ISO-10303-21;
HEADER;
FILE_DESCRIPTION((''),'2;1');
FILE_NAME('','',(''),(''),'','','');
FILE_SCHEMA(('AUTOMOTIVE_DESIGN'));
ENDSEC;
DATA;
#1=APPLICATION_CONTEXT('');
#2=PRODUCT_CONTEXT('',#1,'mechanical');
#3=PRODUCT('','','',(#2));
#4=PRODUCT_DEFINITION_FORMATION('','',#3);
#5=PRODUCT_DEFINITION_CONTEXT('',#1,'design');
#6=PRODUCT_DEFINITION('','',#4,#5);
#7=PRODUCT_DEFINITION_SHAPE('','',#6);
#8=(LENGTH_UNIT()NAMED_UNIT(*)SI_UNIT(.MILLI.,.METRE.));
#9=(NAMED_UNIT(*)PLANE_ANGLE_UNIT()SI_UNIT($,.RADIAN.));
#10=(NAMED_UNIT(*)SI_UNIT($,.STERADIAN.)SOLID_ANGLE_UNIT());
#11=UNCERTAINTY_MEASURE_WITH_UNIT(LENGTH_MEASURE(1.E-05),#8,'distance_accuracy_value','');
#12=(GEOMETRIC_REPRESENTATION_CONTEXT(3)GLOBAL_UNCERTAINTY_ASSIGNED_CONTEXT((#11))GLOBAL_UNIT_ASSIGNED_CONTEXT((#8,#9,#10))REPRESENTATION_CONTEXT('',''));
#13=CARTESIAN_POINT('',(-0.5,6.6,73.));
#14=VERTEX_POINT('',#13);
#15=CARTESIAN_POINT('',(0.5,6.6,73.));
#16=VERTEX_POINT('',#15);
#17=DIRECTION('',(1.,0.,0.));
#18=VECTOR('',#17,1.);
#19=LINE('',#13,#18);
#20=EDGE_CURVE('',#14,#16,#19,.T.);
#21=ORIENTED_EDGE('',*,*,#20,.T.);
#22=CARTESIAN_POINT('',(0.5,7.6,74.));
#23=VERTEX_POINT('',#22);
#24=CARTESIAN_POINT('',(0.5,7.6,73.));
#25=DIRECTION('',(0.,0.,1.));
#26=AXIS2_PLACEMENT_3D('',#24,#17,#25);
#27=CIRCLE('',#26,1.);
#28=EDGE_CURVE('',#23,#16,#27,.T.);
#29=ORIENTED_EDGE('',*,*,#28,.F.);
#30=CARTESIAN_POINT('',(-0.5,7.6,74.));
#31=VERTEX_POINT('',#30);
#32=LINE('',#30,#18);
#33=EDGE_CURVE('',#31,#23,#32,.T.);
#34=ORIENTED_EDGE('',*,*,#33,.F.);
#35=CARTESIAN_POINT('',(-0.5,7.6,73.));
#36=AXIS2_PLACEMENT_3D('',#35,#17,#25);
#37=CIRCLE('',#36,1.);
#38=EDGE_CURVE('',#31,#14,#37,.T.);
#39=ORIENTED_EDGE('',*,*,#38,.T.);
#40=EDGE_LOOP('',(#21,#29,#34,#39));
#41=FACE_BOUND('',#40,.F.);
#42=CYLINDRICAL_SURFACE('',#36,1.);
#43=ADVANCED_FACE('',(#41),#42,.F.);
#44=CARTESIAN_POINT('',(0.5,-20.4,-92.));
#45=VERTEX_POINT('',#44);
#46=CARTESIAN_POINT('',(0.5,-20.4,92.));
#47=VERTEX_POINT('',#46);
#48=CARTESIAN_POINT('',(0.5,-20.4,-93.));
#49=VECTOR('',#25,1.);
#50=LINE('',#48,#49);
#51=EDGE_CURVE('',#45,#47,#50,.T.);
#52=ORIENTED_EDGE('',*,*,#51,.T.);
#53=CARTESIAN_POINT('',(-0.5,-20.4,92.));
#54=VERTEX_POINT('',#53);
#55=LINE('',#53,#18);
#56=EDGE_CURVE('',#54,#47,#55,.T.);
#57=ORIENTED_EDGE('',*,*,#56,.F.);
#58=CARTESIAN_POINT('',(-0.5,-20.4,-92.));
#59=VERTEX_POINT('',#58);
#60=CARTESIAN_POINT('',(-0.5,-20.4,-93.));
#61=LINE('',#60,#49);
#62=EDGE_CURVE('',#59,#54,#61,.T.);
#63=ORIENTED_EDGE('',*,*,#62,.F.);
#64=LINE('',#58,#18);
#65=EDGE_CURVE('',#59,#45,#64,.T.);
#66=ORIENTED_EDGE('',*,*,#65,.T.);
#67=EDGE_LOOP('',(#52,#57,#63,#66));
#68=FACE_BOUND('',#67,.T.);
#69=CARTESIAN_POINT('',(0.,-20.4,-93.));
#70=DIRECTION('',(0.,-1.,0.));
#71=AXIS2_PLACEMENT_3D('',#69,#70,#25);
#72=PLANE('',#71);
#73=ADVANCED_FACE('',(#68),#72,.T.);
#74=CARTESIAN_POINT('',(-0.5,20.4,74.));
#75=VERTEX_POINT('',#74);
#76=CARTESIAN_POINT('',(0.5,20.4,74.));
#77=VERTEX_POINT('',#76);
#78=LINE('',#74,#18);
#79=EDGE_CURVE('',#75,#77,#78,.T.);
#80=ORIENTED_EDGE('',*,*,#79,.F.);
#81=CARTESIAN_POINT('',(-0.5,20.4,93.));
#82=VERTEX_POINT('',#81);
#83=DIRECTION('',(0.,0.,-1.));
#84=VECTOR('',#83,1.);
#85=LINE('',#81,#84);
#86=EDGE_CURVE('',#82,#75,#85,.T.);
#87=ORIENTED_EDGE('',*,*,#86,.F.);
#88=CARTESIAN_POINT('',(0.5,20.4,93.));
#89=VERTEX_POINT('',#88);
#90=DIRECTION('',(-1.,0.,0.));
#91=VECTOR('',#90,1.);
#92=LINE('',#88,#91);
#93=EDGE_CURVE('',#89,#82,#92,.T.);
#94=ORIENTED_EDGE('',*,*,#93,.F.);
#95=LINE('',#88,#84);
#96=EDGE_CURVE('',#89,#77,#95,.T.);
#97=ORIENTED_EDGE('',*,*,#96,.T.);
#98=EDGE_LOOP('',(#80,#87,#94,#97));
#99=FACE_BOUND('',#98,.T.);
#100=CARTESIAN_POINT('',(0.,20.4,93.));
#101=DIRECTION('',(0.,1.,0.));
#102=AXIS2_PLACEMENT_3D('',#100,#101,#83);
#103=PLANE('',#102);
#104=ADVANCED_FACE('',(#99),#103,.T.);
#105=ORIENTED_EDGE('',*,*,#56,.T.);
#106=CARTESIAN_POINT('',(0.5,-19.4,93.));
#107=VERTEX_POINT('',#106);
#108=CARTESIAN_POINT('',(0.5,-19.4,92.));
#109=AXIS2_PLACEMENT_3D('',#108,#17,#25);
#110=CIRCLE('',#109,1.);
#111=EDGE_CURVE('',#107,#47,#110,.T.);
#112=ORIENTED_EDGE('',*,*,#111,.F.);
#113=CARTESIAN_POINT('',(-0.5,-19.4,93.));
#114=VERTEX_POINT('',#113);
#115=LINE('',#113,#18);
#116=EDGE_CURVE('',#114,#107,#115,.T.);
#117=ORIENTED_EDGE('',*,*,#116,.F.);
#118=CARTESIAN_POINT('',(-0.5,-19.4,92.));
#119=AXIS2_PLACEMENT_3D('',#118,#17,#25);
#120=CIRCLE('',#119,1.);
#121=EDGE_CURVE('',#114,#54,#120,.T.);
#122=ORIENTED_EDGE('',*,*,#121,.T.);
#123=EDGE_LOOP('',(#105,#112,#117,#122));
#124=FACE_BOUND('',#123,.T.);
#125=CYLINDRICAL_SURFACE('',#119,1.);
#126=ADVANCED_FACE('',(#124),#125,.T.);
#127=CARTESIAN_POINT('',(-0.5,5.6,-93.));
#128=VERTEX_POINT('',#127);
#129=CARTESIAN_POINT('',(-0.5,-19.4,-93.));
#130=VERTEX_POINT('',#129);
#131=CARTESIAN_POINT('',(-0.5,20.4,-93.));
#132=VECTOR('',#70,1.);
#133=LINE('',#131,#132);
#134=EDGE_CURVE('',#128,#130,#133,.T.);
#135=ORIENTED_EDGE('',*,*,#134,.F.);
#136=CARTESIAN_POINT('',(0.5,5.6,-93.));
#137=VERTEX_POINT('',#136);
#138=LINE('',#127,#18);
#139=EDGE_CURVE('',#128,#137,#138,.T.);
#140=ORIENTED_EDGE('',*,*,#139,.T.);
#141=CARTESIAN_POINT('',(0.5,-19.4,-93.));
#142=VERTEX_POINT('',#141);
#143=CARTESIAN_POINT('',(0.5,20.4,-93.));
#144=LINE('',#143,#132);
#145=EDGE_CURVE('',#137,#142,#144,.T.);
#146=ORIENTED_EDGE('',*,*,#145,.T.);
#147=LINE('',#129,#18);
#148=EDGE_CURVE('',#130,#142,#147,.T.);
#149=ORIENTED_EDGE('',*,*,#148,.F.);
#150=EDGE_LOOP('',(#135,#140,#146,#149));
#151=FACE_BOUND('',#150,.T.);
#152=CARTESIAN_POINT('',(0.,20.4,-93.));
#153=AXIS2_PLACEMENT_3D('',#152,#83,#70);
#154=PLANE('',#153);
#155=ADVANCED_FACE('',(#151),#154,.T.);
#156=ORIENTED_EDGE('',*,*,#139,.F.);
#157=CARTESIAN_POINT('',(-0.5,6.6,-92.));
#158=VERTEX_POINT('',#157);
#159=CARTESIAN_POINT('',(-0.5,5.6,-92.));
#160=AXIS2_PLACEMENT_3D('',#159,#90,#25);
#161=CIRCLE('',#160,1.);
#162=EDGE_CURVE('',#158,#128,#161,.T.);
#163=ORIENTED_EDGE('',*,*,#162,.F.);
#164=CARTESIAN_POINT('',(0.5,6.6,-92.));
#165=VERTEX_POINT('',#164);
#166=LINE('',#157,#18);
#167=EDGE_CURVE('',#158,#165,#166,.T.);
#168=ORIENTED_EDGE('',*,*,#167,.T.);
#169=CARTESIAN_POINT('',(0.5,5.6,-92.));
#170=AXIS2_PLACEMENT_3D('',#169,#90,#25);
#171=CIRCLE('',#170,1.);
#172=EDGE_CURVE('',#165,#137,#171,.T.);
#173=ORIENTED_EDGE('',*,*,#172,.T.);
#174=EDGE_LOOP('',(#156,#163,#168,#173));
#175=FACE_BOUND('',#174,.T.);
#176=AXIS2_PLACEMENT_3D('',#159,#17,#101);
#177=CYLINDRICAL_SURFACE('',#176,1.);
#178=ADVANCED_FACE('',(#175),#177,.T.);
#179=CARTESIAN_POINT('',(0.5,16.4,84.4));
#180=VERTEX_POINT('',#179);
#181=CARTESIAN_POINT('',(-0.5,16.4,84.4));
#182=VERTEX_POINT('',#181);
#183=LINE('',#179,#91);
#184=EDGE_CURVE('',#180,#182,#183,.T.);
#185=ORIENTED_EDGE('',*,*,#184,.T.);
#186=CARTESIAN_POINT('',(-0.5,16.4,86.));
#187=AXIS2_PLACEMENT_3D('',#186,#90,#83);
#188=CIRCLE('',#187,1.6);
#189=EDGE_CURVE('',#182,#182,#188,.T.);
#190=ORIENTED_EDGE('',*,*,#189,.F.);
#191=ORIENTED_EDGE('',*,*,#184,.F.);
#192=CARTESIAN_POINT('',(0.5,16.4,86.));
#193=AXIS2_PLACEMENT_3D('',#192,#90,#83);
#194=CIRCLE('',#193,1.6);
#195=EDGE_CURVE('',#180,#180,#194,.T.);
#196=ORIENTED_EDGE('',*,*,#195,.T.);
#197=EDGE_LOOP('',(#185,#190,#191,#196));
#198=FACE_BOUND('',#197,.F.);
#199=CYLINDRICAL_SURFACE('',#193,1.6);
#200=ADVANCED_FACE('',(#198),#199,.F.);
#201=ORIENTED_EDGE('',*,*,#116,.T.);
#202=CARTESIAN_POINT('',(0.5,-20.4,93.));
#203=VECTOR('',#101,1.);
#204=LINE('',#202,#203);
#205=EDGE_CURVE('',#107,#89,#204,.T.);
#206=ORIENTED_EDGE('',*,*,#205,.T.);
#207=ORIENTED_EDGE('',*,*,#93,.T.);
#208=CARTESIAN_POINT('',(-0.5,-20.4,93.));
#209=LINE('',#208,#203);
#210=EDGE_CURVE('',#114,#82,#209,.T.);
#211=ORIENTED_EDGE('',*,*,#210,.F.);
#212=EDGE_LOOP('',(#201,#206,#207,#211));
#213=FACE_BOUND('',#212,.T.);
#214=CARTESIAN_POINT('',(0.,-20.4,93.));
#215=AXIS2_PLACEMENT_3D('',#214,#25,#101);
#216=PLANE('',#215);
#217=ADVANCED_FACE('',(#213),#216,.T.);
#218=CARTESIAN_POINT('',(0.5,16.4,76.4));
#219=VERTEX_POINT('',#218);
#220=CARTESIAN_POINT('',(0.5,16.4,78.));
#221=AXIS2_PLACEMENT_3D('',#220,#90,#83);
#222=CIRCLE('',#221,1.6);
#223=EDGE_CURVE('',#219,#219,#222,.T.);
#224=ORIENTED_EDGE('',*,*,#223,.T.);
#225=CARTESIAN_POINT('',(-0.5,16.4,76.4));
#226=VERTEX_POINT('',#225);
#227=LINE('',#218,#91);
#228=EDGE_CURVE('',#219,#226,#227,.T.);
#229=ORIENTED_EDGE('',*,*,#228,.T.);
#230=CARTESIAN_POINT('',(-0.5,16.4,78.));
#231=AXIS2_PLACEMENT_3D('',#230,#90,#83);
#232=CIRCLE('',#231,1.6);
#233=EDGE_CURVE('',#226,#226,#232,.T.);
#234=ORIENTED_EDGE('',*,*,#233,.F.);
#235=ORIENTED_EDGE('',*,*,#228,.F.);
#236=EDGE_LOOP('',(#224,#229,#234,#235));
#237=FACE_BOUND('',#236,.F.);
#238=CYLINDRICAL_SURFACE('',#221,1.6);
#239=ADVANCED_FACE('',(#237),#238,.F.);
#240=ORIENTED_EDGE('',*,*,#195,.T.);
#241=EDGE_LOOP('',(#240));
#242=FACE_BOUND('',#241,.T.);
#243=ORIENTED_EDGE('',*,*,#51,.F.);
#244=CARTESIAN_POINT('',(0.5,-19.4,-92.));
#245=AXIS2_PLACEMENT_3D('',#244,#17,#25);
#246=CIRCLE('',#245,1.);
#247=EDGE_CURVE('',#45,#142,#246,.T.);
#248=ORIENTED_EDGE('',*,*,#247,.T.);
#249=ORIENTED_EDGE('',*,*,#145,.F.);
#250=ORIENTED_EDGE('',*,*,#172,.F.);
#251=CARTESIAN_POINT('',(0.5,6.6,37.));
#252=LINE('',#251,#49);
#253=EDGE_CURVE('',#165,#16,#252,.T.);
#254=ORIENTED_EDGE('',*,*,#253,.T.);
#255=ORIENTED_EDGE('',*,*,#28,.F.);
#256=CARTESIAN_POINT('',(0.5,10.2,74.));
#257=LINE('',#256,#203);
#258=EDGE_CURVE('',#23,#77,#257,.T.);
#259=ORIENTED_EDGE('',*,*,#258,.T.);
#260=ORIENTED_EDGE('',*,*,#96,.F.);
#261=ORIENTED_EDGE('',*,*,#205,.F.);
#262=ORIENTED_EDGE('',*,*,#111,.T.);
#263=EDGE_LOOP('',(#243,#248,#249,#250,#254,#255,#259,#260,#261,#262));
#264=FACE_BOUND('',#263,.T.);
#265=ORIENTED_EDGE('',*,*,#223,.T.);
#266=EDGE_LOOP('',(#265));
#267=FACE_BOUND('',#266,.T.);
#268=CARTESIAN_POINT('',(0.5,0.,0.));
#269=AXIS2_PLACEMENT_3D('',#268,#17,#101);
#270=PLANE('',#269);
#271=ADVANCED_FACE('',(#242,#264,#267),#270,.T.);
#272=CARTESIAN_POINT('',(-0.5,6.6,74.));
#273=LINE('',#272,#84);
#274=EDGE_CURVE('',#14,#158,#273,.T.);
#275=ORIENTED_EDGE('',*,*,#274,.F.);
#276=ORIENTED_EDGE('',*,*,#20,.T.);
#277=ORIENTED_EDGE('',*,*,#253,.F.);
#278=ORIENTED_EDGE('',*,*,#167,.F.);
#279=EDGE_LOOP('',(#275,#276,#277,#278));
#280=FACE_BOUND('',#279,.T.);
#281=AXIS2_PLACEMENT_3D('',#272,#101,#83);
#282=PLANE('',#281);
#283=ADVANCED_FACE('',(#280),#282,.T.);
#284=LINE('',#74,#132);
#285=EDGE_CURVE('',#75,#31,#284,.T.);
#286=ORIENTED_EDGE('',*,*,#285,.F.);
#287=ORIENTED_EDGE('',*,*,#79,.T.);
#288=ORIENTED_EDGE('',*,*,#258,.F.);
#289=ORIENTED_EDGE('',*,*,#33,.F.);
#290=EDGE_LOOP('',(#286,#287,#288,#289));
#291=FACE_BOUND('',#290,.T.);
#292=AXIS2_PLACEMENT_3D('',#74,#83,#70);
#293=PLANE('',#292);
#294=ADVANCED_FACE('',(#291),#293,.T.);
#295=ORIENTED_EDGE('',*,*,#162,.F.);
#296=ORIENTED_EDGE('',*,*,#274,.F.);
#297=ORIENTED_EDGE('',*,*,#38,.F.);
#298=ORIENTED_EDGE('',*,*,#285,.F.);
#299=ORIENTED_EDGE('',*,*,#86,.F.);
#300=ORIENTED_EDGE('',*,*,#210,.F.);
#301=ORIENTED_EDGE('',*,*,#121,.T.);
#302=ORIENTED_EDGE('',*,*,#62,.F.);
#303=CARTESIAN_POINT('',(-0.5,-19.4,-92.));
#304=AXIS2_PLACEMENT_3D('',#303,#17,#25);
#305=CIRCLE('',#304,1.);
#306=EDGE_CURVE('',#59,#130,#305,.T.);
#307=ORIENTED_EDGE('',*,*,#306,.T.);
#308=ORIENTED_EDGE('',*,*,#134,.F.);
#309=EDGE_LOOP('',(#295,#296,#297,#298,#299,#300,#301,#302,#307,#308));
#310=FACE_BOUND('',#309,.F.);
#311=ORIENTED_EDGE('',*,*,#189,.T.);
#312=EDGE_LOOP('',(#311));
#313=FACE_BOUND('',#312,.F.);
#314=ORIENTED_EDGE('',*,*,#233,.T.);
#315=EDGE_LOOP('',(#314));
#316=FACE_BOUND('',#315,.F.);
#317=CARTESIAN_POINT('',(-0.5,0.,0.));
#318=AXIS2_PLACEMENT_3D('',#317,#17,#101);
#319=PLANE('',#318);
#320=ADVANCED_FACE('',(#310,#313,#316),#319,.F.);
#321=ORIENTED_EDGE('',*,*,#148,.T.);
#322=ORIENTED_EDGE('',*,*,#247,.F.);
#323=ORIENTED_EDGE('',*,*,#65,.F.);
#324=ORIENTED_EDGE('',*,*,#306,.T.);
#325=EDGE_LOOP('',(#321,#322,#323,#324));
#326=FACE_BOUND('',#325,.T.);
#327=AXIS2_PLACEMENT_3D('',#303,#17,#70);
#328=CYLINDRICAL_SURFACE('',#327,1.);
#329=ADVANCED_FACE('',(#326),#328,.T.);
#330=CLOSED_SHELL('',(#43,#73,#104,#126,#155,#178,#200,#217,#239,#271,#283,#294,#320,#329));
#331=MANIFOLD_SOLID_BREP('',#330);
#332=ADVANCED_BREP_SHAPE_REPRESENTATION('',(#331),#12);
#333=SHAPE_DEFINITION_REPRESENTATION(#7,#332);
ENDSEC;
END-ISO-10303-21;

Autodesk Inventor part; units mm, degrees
ref_plane "YZ Plane" through (0, 0, 0) normal (1, 0, 0) x (0, 1, 0)
ref_plane "XZ Plane" through (0, 0, 0) normal (0, 1, 0) x (-1, 0, 0)
ref_plane "XY Plane" through (0, 0, 0) normal (0, 0, 1) x (1, 0, 0)
sketch "スケッチ1" plane through (0, 0, 0) normal (1, 0, 0) x (0, 1, 0)
  line L0 (-20.4, 93) -> (20.4, 93)
  line L1 (20.4, 93) -> (20.4, -93)
  line L2 (20.4, -93) -> (-20.4, -93)
  line L3 (-20.4, -93) -> (-20.4, 93)
  line L4 (-20.4, 93) -> (20.4, -93) construction
  line L5 (20.4, 93) -> (-20.4, -93) construction
  point P0 (0, 0)
  dimension "d0" = 40.8
  dimension "d1" = 186
extrude "プレート1" add sketch "スケッチ1" along normal mid plane 1
sketch "スケッチ2" plane through (0.5, 0, 0) normal (1, 0, 0) x (0, 0, -1)
  line L0 (-93, 20.4) -> (93, 20.4) projected
  line L1 (-93, -20.4) -> (-93, 20.4) projected
  point P0 (0, 0)
  point P1 (-86, 16.4)
  point P2 (-78, 16.4)
  dimension "d3" = 4
  dimension "d4" = 7
  dimension "d5" = 8
hole "穴1" at (0.5, 16.4, 86) at (0.5, 16.4, 78) direction (-1, 0, 0) diameter 3.2 end through all clearance for "Socket Head Cap Screw" size "M3" standard "Ansi Metric M Profile"
sketch "スケッチ3" plane through (-0.5, 0, 0) normal (-1, 0, 0) x (0, 0, 1)
  line L0 (-93, 20.4) -> (-93, -20.4) projected
  line L1 (-93, 20.4) -> (74, 20.4)
  line L2 (74, 20.4) -> (74, 6.6)
  line L3 (74, 6.6) -> (-93, 6.6)
  line L4 (-93, 6.6) -> (-93, 20.4)
  line L5 (-93, -20.4) -> (93, -20.4) projected
  line L6 (93, -20.4) -> (93, 20.4) projected
  point P0 (0, 0)
  point P1 (-93, 6.6)
  dimension "d14" = 19
  dimension "d18" = 13.8
extrude "押し出し1" cut sketch "スケッチ3" against normal blind 10
fillet "コーナーR1" radius 1 4 edges at (0, -20.4, 93) (0, -20.4, -93) (0, 6.6, -93) (0, 6.6, 74)
equation "\"d11\" = Thickness"
equation "\"d2\" = Thickness"
equation "\"BendRadius\" = Thickness"
equation "\"BendReliefWidth\" = Thickness"
equation "\"BendReliefDepth\" = 0.5 * Thickness"
equation "\"CornerReliefSize\" = 4 * Thickness"
equation "\"MinimumRemnant\" = 2 * Thickness"
equation "\"TransitionRadius\" = BendRadius"
equation "\"JacobiRadiusSize\" = BendRadius"
equation "\"GapSize\" = Thickness"
equation "\"Thickness\" = 1"
properties part number "s_carbon_plate2" material "CFRP"
